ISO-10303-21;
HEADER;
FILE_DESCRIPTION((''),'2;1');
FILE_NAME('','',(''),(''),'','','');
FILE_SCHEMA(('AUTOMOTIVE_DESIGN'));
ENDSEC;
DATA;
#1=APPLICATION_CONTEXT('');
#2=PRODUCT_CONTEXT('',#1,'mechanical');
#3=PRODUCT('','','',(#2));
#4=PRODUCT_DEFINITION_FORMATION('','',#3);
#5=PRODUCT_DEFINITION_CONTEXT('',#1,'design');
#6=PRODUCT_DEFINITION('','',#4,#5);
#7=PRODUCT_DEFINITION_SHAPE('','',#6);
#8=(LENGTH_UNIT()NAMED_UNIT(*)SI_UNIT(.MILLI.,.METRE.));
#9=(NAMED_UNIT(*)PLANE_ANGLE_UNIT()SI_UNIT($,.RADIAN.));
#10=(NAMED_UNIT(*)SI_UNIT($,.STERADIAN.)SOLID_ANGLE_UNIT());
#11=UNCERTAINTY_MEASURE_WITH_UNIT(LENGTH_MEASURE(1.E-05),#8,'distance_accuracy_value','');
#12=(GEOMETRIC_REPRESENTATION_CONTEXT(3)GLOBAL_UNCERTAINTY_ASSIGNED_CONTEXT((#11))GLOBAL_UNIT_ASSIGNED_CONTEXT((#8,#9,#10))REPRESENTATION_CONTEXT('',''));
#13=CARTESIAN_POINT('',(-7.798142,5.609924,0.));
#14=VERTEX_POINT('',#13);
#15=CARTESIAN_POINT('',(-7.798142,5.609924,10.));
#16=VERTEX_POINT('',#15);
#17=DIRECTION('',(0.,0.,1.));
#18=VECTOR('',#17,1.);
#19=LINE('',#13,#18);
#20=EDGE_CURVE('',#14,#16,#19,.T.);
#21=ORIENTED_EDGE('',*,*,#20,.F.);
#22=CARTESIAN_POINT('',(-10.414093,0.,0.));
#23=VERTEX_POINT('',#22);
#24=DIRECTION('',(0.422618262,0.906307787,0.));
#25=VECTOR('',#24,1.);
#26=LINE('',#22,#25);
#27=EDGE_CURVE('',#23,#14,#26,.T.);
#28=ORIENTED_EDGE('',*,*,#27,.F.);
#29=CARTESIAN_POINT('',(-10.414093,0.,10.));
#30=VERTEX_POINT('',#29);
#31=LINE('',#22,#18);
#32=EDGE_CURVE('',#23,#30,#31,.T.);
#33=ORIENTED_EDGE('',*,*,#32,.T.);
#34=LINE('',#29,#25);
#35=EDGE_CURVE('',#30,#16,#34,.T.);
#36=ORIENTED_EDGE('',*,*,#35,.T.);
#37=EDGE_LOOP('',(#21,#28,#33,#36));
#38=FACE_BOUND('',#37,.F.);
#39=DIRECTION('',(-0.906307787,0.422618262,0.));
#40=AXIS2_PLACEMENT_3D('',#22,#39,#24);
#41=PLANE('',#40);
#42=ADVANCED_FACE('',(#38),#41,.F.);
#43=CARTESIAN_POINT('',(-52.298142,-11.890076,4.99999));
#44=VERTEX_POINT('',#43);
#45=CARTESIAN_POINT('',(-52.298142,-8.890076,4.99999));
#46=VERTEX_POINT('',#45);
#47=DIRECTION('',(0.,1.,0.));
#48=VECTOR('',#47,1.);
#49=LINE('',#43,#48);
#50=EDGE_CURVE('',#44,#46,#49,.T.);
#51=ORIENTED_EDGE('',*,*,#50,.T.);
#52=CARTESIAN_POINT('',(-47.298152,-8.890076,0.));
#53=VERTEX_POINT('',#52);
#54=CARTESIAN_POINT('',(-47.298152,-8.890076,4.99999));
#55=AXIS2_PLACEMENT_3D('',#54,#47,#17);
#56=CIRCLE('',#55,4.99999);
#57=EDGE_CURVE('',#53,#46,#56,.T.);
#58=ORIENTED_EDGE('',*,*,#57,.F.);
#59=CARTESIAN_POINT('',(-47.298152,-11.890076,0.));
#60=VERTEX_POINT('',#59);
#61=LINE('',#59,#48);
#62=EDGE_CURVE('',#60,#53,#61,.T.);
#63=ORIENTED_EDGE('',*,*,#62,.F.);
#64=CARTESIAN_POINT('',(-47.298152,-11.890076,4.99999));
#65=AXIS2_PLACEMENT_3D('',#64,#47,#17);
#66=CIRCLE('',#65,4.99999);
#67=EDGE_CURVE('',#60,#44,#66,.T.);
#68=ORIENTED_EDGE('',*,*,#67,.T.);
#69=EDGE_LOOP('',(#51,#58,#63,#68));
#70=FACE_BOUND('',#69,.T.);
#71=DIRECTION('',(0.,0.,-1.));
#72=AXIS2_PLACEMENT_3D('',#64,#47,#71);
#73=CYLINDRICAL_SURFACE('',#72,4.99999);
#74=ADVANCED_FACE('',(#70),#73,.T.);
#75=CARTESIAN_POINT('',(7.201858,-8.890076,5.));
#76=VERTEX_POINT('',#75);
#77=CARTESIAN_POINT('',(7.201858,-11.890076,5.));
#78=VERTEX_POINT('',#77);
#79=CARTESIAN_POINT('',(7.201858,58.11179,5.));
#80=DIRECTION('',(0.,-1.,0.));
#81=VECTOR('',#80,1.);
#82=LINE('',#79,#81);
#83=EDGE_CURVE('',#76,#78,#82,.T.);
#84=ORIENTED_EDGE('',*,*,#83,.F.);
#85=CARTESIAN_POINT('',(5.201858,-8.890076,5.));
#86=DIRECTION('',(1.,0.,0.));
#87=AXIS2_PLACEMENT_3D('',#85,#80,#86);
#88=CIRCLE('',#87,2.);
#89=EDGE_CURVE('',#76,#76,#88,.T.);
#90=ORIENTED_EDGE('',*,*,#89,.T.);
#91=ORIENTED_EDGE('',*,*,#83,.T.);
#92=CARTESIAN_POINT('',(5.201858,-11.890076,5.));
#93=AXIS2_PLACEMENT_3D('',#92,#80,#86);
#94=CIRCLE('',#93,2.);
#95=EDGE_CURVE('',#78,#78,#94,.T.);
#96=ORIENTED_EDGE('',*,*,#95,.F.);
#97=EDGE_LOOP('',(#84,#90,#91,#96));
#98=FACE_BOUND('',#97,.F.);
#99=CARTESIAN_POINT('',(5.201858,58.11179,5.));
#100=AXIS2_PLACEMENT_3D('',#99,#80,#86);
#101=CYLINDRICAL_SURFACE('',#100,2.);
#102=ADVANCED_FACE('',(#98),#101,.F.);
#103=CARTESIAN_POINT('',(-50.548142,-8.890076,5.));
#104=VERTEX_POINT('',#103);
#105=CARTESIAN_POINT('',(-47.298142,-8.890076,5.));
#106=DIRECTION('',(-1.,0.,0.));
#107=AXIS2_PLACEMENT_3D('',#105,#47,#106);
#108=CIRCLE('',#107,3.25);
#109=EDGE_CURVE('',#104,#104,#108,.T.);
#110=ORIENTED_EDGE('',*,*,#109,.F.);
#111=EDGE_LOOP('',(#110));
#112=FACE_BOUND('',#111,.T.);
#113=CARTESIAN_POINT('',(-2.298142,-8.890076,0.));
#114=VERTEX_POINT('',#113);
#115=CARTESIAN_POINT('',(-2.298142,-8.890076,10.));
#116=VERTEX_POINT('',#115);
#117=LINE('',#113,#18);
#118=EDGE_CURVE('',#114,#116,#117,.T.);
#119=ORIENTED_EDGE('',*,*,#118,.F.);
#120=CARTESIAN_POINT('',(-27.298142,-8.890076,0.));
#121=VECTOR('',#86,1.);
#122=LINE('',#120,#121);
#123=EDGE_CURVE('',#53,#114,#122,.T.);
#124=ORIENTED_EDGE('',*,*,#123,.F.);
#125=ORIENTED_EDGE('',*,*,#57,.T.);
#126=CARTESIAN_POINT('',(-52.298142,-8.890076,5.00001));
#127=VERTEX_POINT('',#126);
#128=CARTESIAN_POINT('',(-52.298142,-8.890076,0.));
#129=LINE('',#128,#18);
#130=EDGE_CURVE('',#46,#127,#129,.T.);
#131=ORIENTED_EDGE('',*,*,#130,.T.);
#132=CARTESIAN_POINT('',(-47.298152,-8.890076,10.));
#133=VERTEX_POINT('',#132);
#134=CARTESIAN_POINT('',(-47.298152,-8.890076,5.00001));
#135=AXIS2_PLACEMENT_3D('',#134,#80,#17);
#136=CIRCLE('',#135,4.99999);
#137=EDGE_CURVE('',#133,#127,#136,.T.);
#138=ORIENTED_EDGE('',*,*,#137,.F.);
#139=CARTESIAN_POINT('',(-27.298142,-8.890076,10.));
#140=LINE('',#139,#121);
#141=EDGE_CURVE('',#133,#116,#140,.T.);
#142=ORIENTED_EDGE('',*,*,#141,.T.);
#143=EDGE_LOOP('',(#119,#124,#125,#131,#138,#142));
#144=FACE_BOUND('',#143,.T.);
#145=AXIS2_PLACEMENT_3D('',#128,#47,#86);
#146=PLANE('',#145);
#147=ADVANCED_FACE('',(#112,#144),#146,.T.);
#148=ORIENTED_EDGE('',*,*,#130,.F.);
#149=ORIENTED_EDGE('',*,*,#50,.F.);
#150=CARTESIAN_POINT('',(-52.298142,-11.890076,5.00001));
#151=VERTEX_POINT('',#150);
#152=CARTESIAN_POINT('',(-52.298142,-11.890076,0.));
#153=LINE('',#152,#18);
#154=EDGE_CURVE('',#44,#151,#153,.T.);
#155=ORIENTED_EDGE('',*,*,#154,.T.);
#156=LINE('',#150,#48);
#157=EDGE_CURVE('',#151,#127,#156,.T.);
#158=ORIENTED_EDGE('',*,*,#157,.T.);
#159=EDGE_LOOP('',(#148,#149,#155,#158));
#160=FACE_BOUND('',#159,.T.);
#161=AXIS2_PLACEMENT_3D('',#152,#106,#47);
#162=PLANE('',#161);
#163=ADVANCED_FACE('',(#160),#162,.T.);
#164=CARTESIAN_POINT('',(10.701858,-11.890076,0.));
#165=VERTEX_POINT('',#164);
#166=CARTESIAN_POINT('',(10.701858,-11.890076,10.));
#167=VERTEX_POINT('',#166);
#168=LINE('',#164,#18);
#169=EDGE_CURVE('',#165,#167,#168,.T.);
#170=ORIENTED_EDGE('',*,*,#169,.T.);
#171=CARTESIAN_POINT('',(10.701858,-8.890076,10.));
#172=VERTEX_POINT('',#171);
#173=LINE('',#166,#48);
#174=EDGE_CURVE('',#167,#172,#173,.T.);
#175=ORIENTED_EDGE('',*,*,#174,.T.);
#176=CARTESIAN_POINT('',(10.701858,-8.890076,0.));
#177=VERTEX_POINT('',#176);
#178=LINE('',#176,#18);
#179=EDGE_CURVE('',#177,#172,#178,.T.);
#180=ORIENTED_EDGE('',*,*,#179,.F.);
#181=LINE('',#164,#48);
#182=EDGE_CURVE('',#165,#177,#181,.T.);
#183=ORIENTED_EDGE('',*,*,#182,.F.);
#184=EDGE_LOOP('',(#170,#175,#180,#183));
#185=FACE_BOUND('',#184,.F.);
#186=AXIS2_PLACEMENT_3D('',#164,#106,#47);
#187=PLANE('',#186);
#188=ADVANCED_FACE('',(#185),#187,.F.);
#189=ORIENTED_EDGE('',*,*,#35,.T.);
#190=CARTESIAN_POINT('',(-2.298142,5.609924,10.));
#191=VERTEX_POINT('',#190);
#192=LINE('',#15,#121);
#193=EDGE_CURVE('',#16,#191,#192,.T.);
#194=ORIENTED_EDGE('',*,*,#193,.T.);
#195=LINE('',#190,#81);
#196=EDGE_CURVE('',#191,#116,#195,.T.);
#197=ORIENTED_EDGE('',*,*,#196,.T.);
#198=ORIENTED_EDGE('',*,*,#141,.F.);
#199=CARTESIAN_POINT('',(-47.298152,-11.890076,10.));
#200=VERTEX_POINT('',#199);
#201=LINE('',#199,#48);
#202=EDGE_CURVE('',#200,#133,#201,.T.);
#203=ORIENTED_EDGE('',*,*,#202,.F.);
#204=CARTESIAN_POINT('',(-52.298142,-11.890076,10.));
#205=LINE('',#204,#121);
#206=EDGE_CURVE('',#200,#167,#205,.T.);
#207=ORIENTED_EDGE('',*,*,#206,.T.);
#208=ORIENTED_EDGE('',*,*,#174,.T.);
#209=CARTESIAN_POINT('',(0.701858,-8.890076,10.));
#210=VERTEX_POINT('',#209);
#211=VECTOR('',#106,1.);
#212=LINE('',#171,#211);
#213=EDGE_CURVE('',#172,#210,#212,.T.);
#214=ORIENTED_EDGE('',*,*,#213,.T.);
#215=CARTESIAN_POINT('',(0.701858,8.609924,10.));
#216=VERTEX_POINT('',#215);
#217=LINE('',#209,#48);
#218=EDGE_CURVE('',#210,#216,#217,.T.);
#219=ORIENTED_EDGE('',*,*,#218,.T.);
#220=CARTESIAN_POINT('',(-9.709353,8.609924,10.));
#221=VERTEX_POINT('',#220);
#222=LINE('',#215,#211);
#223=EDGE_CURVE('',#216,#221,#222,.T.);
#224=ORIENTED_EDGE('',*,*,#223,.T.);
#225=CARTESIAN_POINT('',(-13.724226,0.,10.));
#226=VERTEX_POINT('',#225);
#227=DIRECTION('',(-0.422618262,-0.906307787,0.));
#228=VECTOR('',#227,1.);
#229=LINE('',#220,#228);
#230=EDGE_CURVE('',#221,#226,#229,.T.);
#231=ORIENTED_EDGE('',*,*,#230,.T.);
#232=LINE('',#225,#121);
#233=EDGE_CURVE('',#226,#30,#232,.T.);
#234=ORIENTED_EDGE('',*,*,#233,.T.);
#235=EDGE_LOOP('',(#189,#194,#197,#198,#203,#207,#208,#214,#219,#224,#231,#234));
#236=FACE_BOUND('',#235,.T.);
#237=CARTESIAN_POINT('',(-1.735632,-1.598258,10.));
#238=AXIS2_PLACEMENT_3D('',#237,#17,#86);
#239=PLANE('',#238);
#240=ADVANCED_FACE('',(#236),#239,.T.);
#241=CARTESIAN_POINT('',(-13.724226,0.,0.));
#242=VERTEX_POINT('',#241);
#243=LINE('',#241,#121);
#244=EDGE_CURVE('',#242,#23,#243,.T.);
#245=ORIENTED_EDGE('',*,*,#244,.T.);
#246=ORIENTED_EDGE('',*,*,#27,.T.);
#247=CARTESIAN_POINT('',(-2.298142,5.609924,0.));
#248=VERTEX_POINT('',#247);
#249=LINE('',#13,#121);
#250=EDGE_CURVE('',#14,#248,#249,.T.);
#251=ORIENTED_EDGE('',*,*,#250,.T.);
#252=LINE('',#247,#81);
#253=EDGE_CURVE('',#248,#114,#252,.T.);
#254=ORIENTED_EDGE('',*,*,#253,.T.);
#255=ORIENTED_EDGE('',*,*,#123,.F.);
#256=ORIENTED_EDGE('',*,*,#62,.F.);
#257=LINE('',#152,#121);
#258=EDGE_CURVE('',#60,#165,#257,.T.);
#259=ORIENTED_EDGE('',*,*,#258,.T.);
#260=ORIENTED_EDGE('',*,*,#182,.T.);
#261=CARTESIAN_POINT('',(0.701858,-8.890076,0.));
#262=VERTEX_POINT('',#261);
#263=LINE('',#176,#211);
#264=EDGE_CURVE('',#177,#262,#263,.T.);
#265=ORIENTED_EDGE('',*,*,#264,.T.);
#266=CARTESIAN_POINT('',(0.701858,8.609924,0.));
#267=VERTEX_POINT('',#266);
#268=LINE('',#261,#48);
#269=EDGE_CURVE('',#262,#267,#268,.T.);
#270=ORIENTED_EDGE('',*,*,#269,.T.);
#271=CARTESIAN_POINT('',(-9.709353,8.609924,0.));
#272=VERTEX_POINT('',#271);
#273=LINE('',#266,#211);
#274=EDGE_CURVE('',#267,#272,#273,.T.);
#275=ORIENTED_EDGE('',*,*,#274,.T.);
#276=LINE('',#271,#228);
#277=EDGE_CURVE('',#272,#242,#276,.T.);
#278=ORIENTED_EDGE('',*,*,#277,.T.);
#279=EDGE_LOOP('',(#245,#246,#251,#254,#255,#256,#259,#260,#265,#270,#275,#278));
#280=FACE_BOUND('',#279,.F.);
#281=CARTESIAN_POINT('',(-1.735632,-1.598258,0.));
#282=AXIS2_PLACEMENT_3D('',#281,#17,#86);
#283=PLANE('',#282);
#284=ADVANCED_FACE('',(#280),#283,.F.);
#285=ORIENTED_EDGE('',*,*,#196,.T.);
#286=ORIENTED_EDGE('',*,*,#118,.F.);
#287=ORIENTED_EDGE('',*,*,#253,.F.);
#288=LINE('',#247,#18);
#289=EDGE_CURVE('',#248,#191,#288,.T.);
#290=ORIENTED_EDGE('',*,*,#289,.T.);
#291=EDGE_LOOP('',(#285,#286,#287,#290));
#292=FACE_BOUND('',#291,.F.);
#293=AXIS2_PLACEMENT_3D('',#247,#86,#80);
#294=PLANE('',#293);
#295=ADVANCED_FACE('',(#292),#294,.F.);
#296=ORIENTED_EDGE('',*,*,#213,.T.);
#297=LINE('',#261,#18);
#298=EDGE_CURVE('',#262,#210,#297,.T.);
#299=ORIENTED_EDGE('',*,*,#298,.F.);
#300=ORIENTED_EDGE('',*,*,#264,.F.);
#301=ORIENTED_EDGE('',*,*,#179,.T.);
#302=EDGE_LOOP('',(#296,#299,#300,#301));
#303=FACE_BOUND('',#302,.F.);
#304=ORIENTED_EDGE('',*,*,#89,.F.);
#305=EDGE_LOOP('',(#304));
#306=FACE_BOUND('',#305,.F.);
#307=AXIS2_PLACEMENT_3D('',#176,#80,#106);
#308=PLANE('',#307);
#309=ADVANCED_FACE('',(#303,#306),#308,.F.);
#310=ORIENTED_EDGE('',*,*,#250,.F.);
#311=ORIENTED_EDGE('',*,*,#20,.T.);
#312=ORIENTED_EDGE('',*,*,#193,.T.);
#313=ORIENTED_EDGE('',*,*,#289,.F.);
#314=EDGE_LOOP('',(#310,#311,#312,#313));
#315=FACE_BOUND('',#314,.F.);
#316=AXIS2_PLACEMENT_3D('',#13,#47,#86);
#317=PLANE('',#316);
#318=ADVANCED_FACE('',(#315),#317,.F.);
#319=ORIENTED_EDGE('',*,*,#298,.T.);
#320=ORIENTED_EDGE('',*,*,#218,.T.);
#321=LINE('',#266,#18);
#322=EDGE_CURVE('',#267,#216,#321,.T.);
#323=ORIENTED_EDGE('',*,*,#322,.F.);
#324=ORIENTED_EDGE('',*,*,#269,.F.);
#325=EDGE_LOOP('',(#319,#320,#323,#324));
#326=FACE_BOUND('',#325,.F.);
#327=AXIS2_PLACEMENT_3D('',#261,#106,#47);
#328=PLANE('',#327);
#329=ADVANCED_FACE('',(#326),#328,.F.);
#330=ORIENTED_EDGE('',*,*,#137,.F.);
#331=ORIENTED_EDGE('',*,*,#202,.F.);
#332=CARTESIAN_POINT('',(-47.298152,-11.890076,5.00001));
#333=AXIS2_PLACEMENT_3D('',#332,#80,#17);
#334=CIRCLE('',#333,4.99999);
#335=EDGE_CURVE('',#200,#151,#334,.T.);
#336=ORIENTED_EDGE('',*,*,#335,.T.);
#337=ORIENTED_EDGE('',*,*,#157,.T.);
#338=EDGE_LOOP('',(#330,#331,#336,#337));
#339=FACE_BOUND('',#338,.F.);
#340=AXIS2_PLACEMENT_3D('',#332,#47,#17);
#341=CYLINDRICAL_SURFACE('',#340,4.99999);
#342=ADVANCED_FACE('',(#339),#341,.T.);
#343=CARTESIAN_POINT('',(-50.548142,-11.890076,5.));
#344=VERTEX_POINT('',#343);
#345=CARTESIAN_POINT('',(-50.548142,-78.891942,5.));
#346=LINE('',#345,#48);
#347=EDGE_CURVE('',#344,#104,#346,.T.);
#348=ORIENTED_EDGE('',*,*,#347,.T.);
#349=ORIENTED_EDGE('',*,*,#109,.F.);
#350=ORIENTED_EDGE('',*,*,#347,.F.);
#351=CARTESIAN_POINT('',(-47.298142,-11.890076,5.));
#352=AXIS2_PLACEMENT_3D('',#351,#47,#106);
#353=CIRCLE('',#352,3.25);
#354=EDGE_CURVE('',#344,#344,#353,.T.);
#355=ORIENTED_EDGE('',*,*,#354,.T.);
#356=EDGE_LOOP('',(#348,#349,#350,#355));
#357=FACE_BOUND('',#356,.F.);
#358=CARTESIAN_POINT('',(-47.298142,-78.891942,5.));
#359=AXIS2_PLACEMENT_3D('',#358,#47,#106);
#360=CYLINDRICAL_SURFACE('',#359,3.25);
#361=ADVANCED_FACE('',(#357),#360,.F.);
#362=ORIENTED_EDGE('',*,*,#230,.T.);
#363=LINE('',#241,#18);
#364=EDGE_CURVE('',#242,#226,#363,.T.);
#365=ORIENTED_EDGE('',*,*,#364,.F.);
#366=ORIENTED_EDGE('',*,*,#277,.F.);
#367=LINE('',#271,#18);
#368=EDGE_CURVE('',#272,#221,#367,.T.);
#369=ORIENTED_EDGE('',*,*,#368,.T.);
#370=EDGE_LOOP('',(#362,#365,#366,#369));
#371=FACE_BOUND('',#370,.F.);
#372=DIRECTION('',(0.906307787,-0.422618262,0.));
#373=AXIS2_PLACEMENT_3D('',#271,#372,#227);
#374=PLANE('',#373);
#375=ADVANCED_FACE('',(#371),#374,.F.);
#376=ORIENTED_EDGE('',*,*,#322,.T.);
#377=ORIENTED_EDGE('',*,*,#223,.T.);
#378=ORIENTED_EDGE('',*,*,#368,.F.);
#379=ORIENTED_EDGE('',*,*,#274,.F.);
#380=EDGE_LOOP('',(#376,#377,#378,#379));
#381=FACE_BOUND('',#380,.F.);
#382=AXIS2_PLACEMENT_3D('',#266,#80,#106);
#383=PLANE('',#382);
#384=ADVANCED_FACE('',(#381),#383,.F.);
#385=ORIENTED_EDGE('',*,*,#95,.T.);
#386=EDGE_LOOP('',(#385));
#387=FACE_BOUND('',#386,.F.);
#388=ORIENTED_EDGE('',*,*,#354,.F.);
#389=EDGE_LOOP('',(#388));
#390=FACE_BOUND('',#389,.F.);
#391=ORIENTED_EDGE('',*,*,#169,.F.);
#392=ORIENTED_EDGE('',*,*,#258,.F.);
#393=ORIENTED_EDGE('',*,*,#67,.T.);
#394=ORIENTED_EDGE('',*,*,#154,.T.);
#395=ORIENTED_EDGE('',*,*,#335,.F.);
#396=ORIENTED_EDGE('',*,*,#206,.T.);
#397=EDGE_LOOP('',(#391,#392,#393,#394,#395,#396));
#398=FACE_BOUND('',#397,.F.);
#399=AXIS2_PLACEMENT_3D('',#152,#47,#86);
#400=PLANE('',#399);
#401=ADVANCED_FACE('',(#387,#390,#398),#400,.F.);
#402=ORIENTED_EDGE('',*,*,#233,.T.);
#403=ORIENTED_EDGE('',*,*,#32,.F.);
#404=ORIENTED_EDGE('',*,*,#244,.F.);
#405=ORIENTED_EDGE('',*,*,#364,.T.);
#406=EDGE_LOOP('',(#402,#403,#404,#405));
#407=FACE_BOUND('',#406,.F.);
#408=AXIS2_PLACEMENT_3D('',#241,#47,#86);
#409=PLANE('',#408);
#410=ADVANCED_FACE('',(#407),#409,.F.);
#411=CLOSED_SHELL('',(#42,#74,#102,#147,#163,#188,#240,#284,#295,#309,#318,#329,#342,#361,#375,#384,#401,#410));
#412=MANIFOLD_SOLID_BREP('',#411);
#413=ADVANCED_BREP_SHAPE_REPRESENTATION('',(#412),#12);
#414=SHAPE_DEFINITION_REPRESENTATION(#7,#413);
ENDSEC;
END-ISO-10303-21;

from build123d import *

# Parameters (mm, degrees)
F0_W     = 50
F0_H     = 3
F1_DEPTH = 10
F3_D     = 4
F5_R     = 4.99999
F6_D     = 6.5


# Not quite as in the source:
# - a fillet or chamfer is up to 0.001 mm smaller than in the source, because OpenCascade refuses the exact size


with BuildPart() as f1:
    # F0 (on Top) → F1 (new body)
    with BuildSketch(Plane.XY):
        Polygon((-2.2981421612, -11.8900760232), (10.7018578388, -11.8900760232), (10.7018578388, -8.8900760232), (0.7018578388, -8.8900760232), (0.7018578388, 8.6099239768), (-9.7093529436, 8.6099239768), (-13.7242264302, 0), (-10.4140926733, 0), (-7.7981421612, 5.6099239768), (-2.2981421612, 5.6099239768), (-2.2981421612, -8.8900760232), align=None)
        with Locations((-27.2981421612, -10.3900760232)):
            Rectangle(F0_W, F0_H)
    extrude(amount=F1_DEPTH)

    # F3 (through all)
    with Locations(Plane(origin=(0, -8.8900760232, 0), x_dir=(-1, 0, 0), z_dir=(0, 1, 0))):
        with Locations((-5.2018578388, 5)):
            Hole(F3_D / 2)

    # F5 (radius 5 in the source; OpenCascade refuses exactly that, so slightly less here)
    f5_edges = [f1.edges().sort_by_distance(p)[0] for p in [
        (-52.298142, -10.390076, 10),
        (-52.298142, -10.390076, 0),
    ]]
    fillet(f5_edges, radius=F5_R)

    # F6 (through all)
    with Locations(Plane.XZ.offset(11.8900760232)):
        with Locations((-47.2981421612, 5)):
            Hole(F6_D / 2)


solid = f1.part
